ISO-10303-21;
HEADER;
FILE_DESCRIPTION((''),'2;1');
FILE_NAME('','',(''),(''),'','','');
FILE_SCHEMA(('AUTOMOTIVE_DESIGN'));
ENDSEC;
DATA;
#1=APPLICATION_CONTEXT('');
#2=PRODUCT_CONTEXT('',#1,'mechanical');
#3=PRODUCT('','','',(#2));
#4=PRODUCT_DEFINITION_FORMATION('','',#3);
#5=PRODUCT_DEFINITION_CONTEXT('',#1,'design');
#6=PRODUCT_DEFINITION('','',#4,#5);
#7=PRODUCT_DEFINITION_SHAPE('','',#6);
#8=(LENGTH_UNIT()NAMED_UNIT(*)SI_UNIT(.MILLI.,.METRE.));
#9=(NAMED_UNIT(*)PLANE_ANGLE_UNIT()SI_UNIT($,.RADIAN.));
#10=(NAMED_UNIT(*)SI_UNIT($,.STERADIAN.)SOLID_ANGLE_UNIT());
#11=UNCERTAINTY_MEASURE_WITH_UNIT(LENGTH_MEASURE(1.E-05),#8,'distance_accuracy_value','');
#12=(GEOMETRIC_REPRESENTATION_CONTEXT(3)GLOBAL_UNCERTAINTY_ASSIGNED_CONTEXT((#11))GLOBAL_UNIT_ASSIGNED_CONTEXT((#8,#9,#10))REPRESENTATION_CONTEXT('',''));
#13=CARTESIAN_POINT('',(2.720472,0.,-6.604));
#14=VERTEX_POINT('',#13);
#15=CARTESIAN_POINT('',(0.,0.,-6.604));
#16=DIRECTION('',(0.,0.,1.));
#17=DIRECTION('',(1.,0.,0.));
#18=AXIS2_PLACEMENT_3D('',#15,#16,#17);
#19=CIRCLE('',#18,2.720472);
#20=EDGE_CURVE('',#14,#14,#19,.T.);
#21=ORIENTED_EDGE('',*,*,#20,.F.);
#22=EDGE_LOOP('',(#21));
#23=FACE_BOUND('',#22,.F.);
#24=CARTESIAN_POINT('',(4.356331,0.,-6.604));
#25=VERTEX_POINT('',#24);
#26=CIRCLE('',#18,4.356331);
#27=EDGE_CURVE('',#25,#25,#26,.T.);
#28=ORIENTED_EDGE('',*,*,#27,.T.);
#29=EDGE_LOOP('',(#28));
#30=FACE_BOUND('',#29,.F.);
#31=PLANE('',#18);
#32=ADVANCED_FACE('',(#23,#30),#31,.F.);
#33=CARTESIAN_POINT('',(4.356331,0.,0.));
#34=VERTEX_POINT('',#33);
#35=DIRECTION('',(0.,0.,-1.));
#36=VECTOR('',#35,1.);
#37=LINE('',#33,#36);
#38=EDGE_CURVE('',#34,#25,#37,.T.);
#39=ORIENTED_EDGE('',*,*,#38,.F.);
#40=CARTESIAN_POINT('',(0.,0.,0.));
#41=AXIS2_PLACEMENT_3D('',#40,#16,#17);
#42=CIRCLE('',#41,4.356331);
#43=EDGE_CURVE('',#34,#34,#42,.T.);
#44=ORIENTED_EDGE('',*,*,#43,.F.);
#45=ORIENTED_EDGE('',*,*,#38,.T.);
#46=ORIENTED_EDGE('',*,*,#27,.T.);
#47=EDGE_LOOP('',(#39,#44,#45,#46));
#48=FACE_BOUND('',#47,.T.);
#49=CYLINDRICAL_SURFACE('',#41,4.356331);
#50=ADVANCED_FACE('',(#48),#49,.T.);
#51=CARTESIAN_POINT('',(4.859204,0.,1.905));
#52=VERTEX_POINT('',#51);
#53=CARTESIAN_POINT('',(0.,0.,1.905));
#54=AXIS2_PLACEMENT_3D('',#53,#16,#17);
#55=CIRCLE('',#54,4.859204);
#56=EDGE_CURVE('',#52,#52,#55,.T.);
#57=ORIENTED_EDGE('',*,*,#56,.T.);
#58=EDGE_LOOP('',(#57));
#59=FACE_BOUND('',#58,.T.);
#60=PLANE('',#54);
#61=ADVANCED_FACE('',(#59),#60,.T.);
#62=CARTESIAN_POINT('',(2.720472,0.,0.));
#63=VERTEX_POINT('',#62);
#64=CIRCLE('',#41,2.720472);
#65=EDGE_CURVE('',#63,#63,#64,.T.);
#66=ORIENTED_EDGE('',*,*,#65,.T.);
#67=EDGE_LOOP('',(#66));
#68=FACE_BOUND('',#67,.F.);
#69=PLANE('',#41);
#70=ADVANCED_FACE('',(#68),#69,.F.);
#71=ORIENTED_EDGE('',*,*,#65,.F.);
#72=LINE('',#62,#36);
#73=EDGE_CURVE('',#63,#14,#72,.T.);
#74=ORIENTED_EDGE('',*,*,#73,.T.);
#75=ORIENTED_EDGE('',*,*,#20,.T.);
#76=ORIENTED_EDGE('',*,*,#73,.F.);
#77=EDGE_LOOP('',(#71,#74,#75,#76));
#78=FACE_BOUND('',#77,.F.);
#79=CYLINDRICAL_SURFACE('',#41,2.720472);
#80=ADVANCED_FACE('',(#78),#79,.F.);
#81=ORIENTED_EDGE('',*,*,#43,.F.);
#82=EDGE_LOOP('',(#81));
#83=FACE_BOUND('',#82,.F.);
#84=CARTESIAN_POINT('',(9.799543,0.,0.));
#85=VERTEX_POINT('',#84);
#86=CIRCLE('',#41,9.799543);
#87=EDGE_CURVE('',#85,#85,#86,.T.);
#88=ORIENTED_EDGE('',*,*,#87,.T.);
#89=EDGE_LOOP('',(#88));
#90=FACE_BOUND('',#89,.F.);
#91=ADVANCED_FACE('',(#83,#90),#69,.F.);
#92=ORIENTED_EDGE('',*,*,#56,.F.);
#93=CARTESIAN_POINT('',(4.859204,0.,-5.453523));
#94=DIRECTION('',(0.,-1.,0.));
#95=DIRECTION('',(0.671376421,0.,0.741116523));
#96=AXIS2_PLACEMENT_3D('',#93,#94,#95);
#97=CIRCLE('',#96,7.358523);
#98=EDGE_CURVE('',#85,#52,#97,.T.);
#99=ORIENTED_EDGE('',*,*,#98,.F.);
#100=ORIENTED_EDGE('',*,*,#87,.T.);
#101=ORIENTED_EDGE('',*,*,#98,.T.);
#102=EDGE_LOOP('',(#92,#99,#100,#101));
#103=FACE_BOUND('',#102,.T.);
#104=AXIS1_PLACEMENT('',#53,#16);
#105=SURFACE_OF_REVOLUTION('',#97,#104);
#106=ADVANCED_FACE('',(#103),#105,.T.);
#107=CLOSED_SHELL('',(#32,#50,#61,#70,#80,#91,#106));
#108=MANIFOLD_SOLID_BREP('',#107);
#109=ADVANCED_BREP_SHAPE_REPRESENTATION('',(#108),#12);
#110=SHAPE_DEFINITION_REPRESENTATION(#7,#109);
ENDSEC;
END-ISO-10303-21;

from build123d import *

# Parameters (mm, degrees)
F0_R     = 9.7995430213
F0_R_2   = 4.3563305412
F1_DEPTH = 1.905
F0_R_3   = 2.7204723389
F2_DEPTH = 1.905
F3_DEPTH = 6.604


# Not quite as in the source:
# - a fillet or chamfer that OpenCascade refuses, or shapes differently, is made with other operations: its cross-section is extruded or revolved along the edge and cut away or added


with BuildPart() as f1:
    # F0 (on Top) → F1 (new body)
    with BuildSketch(Plane.XY):
        Circle(F0_R)
        Circle(F0_R_2, mode=Mode.SUBTRACT)
    extrude(amount=F1_DEPTH)

    # F0 (on Top) → F2 (join)
    with BuildSketch(Plane.XY):
        Circle(F0_R_2)
        Circle(F0_R_3, mode=Mode.SUBTRACT)
        Circle(F0_R_3)
    extrude(amount=F2_DEPTH)

    # F0 (on Top) → F3 (join)
    with BuildSketch(Plane.XY):
        Circle(F0_R_2)
        Circle(F0_R_3, mode=Mode.SUBTRACT)
    extrude(amount=-F3_DEPTH)

    # F4: fillet of radius 7.3585229381 on 1 edges, made by hand

    # F4_s1 → F4_t2 (revolve, cut)
    with BuildSketch(Plane.XZ):
        with BuildLine():
            ThreePointArc((9.7995430213, 0), (7.5066545293, 1.4122520897), (4.8592042279, 1.905))
            Line((4.8592042279, 1.905), (9.7995430213, 1.905))
            Line((9.7995430213, 1.905), (9.7995430213, 0))
        make_face()
    revolve(axis=Axis((0, 0, 1.905), (0, 0, 1)), mode=Mode.SUBTRACT)


solid = f1.part
